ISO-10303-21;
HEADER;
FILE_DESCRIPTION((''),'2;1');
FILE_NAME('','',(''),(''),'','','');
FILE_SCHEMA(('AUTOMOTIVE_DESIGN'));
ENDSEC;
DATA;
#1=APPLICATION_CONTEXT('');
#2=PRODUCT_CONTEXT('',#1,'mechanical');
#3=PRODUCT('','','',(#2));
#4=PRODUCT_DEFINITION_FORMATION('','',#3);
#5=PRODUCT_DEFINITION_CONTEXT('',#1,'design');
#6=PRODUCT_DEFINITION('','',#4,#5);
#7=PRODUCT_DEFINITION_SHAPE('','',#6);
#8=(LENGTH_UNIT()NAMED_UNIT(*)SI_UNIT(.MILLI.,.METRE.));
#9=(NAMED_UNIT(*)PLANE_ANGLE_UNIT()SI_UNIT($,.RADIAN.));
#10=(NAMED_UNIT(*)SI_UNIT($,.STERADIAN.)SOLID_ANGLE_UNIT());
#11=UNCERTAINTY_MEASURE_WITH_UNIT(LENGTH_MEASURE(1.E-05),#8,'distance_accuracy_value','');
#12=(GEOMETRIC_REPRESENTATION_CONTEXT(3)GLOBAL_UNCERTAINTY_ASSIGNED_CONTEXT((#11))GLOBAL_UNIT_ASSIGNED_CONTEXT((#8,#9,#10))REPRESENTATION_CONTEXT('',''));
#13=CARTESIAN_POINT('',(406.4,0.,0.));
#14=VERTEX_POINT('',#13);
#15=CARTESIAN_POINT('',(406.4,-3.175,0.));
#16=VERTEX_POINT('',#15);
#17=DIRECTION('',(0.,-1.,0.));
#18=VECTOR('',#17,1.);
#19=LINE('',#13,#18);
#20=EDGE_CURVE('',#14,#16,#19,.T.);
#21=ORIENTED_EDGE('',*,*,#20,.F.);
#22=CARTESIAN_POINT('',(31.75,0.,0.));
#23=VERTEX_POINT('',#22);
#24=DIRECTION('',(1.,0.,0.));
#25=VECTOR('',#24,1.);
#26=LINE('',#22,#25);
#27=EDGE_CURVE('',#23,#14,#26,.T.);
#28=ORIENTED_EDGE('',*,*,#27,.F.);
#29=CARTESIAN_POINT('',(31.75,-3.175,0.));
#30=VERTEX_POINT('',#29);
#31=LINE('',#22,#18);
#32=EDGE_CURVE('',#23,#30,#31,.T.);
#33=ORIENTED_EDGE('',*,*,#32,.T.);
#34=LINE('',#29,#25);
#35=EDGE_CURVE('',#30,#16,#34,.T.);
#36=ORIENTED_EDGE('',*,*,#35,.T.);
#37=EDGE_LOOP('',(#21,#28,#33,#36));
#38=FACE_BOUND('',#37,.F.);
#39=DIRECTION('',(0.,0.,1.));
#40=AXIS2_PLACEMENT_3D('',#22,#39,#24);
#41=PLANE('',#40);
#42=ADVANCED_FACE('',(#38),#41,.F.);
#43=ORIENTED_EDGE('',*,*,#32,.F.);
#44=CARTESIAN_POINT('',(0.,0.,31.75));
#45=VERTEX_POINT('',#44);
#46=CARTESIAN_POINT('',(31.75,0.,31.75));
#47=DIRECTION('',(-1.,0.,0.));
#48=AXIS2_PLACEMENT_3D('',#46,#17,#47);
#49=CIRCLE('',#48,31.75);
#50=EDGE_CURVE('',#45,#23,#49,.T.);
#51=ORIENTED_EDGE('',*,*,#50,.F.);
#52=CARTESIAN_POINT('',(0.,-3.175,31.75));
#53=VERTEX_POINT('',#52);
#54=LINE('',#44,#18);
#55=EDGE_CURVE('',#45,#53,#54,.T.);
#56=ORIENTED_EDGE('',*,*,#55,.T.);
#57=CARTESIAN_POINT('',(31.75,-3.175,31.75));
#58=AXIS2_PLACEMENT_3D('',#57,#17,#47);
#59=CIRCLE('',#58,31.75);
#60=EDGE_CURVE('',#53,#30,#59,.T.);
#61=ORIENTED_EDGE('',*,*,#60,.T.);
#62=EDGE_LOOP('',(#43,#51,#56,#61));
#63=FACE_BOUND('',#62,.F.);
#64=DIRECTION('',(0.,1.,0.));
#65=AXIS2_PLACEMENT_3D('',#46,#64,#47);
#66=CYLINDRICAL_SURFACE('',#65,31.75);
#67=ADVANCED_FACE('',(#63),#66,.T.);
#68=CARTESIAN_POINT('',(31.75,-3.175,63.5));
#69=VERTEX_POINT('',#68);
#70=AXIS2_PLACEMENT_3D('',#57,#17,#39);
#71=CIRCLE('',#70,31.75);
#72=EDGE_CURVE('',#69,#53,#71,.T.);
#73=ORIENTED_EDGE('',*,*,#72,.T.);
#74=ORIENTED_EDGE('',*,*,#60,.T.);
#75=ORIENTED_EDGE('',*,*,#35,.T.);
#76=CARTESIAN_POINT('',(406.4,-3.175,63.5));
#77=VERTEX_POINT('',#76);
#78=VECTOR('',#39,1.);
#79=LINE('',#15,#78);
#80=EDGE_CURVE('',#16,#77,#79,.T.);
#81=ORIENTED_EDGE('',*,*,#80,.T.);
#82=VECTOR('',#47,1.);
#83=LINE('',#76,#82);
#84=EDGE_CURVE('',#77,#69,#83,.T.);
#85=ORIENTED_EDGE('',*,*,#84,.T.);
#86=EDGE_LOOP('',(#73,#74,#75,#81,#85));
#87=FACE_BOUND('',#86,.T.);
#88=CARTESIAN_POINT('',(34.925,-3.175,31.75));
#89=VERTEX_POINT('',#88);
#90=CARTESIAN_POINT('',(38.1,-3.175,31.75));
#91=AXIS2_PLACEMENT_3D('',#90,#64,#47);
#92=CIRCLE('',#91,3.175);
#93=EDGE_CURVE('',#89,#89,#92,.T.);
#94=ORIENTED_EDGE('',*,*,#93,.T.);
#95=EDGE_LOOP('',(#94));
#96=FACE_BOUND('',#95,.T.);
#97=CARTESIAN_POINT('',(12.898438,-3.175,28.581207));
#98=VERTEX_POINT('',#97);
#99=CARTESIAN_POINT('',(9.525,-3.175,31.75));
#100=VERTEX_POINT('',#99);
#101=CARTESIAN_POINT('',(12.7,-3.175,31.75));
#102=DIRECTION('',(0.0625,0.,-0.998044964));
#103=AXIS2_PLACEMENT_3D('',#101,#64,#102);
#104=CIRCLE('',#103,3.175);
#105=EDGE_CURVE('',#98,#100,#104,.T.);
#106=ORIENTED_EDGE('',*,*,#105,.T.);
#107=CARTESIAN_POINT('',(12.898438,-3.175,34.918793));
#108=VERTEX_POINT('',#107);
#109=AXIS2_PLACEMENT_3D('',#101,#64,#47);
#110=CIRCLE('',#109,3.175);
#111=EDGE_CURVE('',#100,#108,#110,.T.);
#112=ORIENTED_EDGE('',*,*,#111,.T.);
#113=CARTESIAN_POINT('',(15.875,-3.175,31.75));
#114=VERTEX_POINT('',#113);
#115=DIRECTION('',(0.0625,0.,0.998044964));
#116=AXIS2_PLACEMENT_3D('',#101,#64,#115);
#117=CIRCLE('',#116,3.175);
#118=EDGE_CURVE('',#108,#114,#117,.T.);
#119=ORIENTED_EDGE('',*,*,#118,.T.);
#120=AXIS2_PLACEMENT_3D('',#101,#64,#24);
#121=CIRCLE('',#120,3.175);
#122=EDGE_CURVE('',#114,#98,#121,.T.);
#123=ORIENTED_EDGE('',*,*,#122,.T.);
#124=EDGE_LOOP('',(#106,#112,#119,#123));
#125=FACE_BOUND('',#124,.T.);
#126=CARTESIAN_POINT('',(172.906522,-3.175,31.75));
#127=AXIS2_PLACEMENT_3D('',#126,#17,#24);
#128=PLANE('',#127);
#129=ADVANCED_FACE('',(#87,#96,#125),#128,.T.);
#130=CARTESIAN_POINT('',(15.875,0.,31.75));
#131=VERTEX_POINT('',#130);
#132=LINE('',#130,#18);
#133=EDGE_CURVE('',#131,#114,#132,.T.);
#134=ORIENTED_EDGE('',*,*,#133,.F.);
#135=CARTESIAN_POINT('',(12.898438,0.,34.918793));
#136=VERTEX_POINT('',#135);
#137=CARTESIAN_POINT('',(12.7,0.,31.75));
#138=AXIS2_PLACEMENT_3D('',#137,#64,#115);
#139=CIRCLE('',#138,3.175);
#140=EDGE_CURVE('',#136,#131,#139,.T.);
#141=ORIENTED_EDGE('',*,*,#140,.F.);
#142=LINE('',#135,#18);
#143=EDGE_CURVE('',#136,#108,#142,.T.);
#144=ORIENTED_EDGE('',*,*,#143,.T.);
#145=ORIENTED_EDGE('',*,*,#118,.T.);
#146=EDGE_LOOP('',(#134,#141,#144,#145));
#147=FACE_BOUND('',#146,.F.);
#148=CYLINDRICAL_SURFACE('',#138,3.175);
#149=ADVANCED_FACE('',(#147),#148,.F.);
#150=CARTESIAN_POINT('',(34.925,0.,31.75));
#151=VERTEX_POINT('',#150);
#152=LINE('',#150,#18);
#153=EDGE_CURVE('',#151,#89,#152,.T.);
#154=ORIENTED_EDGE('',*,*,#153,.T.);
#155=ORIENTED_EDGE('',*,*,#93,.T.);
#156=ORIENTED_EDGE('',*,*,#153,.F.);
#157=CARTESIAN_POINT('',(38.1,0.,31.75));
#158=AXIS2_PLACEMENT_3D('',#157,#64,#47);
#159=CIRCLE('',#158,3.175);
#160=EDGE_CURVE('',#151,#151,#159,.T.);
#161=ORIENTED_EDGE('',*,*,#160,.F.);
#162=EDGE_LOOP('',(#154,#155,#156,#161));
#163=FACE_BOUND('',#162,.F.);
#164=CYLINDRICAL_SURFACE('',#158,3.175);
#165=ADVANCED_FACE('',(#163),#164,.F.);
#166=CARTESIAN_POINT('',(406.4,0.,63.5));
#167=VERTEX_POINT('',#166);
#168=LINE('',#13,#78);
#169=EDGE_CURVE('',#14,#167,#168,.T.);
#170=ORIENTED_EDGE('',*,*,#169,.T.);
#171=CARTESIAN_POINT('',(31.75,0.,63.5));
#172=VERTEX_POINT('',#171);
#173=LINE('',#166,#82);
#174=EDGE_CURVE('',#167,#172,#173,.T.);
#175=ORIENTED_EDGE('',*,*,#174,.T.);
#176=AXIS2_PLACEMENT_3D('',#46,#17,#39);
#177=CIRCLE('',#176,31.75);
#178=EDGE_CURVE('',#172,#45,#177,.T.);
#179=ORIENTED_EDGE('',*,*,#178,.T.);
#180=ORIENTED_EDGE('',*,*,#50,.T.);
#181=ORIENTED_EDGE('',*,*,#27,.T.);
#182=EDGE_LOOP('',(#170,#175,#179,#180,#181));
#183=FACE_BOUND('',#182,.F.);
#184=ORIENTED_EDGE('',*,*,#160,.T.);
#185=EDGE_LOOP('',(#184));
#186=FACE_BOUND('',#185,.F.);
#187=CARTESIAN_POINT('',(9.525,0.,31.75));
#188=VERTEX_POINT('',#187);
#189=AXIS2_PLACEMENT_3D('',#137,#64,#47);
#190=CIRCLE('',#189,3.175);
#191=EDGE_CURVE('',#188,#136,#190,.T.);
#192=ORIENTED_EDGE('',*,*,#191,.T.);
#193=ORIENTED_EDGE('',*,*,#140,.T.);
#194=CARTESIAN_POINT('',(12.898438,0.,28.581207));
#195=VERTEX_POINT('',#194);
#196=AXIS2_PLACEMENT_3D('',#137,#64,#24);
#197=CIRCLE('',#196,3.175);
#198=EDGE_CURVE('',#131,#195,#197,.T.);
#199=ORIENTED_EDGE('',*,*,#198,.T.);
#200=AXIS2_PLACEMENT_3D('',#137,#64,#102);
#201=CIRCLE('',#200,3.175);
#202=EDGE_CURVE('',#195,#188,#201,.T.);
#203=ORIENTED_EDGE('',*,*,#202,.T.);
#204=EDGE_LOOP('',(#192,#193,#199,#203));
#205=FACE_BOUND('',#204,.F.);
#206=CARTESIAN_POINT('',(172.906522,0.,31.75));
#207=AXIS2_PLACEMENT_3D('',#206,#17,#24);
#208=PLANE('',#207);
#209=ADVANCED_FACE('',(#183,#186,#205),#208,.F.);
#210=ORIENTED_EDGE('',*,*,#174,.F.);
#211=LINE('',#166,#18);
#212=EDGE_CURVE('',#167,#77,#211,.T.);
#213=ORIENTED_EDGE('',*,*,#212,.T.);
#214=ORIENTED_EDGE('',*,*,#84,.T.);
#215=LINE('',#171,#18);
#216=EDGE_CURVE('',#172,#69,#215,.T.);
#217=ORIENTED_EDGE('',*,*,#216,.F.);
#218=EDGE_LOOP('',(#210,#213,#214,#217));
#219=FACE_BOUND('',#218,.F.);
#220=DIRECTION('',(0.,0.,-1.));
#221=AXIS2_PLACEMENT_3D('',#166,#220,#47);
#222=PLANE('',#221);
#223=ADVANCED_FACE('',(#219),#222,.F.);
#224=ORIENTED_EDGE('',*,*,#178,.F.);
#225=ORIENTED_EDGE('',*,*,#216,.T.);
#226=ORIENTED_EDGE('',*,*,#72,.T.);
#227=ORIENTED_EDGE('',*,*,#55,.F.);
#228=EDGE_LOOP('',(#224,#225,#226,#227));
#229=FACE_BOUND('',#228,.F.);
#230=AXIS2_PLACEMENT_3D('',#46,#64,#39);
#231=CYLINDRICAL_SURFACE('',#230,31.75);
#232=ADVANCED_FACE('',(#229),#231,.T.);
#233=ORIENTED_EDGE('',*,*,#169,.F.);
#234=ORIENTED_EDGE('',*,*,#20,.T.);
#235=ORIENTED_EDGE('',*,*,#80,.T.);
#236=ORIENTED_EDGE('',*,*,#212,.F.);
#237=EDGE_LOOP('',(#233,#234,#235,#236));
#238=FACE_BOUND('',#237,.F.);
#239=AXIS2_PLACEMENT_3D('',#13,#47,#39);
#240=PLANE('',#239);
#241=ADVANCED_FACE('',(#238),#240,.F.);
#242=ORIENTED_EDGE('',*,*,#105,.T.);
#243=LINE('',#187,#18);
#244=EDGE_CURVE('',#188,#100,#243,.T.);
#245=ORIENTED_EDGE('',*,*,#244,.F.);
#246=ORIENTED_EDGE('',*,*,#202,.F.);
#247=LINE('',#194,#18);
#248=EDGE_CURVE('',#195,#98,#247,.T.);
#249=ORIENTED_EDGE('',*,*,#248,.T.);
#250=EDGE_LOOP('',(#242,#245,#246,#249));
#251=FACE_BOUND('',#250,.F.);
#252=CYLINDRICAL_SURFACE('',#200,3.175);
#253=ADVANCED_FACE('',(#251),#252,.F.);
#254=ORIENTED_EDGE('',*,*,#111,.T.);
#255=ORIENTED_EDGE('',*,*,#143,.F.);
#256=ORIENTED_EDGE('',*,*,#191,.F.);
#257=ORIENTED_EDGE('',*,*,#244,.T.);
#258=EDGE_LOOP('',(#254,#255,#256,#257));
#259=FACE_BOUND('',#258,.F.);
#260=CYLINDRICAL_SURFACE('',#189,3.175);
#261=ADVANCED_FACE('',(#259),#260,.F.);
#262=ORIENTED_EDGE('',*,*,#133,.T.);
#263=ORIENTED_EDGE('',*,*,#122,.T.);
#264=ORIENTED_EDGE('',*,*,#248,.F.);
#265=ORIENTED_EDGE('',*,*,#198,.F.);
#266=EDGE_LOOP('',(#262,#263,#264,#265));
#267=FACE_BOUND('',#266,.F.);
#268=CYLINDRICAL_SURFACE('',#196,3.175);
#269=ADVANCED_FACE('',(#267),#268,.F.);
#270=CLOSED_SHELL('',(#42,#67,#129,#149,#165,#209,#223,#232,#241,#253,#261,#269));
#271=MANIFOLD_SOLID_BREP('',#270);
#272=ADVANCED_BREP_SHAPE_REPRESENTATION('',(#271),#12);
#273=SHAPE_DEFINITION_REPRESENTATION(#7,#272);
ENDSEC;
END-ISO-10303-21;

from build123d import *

# Parameters (mm, degrees)
F1_DEPTH = 3.175


# Not quite as in the source:
# - a feature names something its author has since deleted; it is built from what else it names


with BuildPart() as f1:
    # F0 (on Front) → F1 (new body)
    with BuildSketch(Plane.XZ):
        with BuildLine():
            ThreePointArc((0, 31.75), (9.2993596973, 9.2993596973), (31.75, 0))
            Line((31.75, 0), (329.6745226565, 0))
            ThreePointArc((329.6745226565, 0), (322.395318302, 11.9320738166), (318.7033258065, 25.4128153768))
            ThreePointArc((318.7033258065, 25.4128153768), (311.9501, 31.75), (318.7033258065, 38.0871846232))
            ThreePointArc((318.7033258065, 38.0871846232), (322.395318302, 51.5679261834), (329.6745226565, 63.5))
            Line((329.6745226565, 63.5), (31.75, 63.5))
            ThreePointArc((31.75, 63.5), (9.2993596973, 54.2006403027), (0, 31.75))
        make_face()
        with BuildLine():
            ThreePointArc((12.8984375, 28.5812072396), (10.5262260999, 29.4358409667), (9.525, 31.75))
            ThreePointArc((9.525, 31.75), (10.5262260999, 34.0641590333), (12.8984375, 34.9187927604))
            ThreePointArc((12.8984375, 34.9187927604), (39.6875, 57.1003420835), (63.5, 31.75))
            ThreePointArc((63.5, 31.75), (39.6875, 6.3996579165), (12.8984375, 28.5812072396))
        make_face(mode=Mode.SUBTRACT)
        with BuildLine():
            ThreePointArc((318.7033258065, 25.4128153768), (322.395318302, 11.9320738166), (329.6745226565, 0))
            Line((329.6745226565, 0), (406.4, 0))
            Line((406.4, 0), (406.4, 63.5))
            Line((406.4, 63.5), (329.6745226565, 63.5))
            ThreePointArc((329.6745226565, 63.5), (322.395318302, 51.5679261834), (318.7033258065, 38.0871846232))
            ThreePointArc((318.7033258065, 38.0871846232), (322.9305958628, 36.0952281948), (324.6501, 31.75))
            ThreePointArc((324.6501, 31.75), (322.9305958628, 27.4047718052), (318.7033258065, 25.4128153768))
        make_face()
        with BuildLine():
            ThreePointArc((63.5, 31.75), (39.6875, 57.1003420835), (12.8984375, 34.9187927604))
            ThreePointArc((12.8984375, 34.9187927604), (15.0141590333, 33.9237739001), (15.875, 31.75))
            ThreePointArc((15.875, 31.75), (15.0141590333, 29.5762260999), (12.8984375, 28.5812072396))
            ThreePointArc((12.8984375, 28.5812072396), (39.6875, 6.3996579165), (63.5, 31.75))
        make_face()
        with BuildLine():
            ThreePointArc((41.275, 31.75), (38.1, 28.575), (34.925, 31.75))
            ThreePointArc((34.925, 31.75), (38.1, 34.925), (41.275, 31.75))
        make_face(mode=Mode.SUBTRACT)
        with BuildLine():
            ThreePointArc((318.7033258065, 38.0871846232), (311.9501, 31.75), (318.7033258065, 25.4128153768))
            ThreePointArc((318.7033258065, 25.4128153768), (318.3001, 31.75), (318.7033258065, 38.0871846232))
        make_face()
        with BuildLine():
            ThreePointArc((318.7033258065, 38.0871846232), (318.3001, 31.75), (318.7033258065, 25.4128153768))
            ThreePointArc((318.7033258065, 25.4128153768), (322.9305958628, 27.4047718052), (324.6501, 31.75))
            ThreePointArc((324.6501, 31.75), (322.9305958628, 36.0952281948), (318.7033258065, 38.0871846232))
        make_face()
    extrude(amount=F1_DEPTH)


solid = f1.part
